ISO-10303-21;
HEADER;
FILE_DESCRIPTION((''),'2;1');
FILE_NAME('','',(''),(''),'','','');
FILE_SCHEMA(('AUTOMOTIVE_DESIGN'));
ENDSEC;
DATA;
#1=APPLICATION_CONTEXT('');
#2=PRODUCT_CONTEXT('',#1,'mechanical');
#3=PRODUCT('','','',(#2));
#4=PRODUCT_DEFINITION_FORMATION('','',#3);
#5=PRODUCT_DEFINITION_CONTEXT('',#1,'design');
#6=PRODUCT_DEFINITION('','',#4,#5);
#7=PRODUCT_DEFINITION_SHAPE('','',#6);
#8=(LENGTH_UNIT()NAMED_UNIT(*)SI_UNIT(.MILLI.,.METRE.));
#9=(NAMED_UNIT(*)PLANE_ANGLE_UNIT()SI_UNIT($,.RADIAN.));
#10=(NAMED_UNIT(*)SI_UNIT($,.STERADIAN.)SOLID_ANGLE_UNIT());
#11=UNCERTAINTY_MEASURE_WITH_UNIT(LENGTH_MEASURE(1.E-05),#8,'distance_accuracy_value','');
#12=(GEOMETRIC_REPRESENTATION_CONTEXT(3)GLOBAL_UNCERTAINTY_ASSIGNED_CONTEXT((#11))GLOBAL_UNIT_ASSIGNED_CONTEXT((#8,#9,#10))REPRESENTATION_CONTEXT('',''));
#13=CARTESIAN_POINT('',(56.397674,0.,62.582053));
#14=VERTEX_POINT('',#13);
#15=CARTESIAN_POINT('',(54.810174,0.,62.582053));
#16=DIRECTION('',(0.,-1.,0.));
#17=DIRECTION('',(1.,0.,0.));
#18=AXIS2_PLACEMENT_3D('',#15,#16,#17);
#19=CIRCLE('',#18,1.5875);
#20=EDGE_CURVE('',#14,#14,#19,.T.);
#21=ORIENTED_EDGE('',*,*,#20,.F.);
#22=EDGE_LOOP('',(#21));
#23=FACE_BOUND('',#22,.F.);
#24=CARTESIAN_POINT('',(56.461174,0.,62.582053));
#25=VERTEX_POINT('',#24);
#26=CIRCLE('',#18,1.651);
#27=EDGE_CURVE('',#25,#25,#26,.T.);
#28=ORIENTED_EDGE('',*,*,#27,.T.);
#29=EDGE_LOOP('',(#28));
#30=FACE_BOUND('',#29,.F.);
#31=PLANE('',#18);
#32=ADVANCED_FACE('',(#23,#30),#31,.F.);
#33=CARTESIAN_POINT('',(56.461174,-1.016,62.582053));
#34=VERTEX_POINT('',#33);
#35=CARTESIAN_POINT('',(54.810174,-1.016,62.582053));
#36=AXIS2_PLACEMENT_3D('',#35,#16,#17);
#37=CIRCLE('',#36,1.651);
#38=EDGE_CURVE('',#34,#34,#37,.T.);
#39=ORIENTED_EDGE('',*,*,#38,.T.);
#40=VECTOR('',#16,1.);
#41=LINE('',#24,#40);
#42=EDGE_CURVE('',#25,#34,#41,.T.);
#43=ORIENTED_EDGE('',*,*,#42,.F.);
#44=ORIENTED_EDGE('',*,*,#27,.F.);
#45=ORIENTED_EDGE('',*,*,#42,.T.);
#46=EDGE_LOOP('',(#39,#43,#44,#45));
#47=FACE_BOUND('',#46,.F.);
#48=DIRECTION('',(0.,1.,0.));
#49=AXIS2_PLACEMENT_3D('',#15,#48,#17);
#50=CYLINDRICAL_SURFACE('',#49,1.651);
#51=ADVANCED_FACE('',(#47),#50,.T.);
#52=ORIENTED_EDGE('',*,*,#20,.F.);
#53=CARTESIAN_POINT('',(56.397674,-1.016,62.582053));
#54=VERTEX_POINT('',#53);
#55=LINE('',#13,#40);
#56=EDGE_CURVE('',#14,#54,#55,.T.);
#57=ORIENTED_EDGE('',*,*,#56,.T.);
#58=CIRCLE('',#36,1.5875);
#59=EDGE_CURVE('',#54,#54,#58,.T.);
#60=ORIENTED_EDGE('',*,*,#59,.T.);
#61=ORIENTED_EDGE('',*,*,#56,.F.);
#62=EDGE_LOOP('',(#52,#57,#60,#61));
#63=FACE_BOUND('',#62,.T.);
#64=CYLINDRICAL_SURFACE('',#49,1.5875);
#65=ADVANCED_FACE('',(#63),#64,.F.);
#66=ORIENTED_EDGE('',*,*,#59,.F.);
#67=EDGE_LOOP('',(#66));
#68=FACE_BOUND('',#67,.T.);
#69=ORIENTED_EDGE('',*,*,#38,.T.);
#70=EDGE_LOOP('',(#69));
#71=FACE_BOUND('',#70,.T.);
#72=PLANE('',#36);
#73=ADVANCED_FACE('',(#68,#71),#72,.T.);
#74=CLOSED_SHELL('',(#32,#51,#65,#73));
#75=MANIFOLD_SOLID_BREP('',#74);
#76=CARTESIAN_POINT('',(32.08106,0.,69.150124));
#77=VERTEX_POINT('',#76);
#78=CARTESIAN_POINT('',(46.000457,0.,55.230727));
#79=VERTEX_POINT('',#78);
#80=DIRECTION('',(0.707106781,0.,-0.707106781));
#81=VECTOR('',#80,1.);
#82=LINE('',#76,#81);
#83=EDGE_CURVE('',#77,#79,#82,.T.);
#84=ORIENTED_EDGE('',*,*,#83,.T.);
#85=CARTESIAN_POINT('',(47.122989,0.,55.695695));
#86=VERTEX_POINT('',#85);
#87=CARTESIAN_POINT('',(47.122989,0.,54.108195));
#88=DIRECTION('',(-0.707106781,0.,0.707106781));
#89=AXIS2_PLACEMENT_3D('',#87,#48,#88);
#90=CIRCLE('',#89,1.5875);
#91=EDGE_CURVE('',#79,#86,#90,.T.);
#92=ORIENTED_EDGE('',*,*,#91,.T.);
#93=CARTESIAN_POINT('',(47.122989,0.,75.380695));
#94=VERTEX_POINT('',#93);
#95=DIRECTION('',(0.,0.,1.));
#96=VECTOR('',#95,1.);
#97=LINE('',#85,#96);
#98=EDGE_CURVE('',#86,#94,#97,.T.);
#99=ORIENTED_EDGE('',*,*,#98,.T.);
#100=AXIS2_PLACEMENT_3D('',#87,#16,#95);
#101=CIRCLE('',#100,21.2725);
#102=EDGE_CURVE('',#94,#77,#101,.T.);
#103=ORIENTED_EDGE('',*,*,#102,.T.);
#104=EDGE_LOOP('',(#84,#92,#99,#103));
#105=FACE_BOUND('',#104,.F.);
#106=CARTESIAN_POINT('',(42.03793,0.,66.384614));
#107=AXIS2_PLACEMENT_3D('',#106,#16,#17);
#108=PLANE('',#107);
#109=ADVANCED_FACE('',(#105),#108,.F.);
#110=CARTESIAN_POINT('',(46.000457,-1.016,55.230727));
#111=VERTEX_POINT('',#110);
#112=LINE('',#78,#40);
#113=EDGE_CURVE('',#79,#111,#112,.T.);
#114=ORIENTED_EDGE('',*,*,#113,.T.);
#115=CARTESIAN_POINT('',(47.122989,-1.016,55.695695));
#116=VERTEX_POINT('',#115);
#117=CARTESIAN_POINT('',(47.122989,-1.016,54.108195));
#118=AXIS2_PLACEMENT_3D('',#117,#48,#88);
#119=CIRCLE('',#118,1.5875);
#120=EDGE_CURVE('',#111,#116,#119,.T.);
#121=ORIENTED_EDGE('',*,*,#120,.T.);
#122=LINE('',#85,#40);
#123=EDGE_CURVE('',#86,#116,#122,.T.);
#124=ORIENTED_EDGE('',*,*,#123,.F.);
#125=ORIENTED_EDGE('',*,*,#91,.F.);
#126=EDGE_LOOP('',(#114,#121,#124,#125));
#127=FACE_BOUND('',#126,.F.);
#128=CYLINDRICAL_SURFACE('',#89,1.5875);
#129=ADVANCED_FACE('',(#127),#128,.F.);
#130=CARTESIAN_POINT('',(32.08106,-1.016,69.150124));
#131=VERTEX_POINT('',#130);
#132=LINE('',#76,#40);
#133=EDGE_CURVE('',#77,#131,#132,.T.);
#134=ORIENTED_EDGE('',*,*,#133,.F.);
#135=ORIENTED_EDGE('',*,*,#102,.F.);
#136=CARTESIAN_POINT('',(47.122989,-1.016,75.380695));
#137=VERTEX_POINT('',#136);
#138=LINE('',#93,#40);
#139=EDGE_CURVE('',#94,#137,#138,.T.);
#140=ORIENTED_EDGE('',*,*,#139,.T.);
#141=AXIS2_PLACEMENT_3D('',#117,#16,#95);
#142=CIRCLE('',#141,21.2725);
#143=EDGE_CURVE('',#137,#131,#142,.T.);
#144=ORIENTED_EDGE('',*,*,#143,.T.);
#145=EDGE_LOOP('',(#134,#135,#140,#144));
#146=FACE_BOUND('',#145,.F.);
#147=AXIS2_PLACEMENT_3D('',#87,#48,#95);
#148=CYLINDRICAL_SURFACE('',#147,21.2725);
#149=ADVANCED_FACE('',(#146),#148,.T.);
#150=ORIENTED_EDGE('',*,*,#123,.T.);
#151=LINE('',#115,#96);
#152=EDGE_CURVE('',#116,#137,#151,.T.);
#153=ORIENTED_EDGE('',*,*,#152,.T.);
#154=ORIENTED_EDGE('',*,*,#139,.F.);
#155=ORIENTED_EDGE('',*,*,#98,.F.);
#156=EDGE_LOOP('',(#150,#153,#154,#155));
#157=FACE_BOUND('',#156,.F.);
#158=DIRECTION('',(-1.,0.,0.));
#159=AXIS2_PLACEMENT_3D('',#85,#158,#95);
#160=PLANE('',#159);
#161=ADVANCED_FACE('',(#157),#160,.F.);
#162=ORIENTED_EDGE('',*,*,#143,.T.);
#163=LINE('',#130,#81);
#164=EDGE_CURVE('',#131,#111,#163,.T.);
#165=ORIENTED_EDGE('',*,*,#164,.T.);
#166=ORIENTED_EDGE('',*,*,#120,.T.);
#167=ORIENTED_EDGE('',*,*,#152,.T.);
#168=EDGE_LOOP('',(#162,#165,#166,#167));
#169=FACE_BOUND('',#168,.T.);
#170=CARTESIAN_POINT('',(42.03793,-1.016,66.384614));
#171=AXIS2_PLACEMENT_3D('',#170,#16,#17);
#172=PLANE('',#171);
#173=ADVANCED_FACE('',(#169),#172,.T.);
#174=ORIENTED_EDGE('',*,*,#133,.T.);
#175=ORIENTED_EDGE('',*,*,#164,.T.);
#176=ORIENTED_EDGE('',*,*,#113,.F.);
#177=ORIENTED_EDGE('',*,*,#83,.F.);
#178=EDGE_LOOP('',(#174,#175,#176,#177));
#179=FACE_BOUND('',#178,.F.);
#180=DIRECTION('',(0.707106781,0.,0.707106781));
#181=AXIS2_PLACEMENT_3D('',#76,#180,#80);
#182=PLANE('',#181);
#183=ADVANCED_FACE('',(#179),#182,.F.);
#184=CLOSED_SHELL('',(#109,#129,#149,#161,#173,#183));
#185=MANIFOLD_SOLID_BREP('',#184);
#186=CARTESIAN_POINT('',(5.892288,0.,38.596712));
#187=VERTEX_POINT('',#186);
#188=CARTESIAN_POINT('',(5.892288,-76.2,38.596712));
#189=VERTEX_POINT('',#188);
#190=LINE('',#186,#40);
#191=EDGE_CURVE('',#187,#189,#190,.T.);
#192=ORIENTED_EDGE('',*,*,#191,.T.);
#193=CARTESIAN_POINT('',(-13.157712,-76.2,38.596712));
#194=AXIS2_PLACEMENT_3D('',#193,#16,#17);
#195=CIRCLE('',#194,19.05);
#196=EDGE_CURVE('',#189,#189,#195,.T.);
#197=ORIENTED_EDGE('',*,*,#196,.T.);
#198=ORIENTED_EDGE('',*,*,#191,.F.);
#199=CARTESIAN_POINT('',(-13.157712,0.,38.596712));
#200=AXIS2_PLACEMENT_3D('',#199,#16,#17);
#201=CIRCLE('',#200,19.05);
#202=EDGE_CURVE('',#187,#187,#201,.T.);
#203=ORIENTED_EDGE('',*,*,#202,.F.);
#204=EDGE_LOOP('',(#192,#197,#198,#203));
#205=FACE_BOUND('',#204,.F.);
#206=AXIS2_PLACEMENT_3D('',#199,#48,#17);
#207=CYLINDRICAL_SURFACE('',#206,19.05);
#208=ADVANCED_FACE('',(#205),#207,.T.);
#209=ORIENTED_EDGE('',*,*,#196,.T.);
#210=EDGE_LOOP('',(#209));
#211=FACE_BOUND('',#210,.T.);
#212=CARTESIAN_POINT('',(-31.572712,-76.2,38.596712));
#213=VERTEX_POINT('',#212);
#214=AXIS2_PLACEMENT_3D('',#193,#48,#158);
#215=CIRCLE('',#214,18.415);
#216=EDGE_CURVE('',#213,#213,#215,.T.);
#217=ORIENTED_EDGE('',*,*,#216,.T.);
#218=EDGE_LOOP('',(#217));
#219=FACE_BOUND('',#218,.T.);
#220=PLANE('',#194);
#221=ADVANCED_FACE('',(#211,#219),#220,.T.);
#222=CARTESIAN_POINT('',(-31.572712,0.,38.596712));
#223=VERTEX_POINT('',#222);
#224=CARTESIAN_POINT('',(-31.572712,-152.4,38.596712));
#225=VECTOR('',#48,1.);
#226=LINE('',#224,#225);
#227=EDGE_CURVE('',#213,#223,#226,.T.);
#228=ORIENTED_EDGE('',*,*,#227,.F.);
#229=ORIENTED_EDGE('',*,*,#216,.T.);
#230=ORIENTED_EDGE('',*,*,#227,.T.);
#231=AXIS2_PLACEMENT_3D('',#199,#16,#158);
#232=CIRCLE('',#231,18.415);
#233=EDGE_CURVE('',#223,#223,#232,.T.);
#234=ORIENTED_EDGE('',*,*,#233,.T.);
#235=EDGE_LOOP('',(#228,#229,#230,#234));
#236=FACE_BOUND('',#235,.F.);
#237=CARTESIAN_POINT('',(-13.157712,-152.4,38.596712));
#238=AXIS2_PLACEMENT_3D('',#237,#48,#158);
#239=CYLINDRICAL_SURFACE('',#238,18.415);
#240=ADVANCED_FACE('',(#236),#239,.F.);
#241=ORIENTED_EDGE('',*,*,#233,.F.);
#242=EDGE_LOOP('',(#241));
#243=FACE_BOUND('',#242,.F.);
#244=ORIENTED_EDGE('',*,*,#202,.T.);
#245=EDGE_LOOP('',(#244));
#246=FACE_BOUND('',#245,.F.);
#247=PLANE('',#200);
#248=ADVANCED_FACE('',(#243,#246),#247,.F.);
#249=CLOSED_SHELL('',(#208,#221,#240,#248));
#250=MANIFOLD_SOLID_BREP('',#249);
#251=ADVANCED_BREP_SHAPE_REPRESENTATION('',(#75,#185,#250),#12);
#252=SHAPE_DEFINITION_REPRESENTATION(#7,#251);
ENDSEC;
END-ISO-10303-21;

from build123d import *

# Parameters (mm, degrees)
F0_R     = 19.05
F1_DEPTH = 76.2
F3_D     = 36.83
F3_DEPTH = 76.2
F3_TIP   = 11.0648482994
F5_DEPTH = 1.016
F8_R     = 1.651
F8_R_2   = 1.5875
F9_DEPTH = 1.016


# Not quite as in the source:
# - a feature of the source that left no trace in its solid (it failed there, or was rolled back) is left out
# - a length typed as a fraction of an inch, garbled in the dataset ("3 / 203.2 mm" for 3/8 in), is restored
# - a feature names something its author has since deleted; it is built from what else it names


with BuildPart() as f1:
    # F0 (on Front) → F1 (new body)
    with BuildSketch(Plane.XZ):
        with Locations((-13.1577122957, 38.5967120528)):
            Circle(F0_R)
    extrude(amount=F1_DEPTH)

    # F3
    with Locations(Plane.XZ.offset(76.2)):
        with Locations((-13.1577122957, 38.5967120528)):
            Hole(F3_D / 2, depth=F3_DEPTH)
            with Locations((0, 0, -(F3_DEPTH + F3_TIP / 2))):  # 118° drill point
                Cone(0, F3_D / 2, F3_TIP, mode=Mode.SUBTRACT)


with BuildPart() as f5:
    # F4 (on Front) → F5 (new body)
    with BuildSketch(Plane.XZ):
        with BuildLine():
            Line((47.1229890541, 55.69569515), (47.1229890541, 75.38069515))
            ThreePointArc((47.1229890541, 75.38069515), (38.9823557391, 73.7614225053), (32.0810600513, 69.1501241528))
            Line((32.0810600513, 69.1501241528), (46.0004570389, 55.2307271651))
            ThreePointArc((46.0004570389, 55.2307271651), (46.5154791052, 55.5748539078), (47.1229890541, 55.69569515))
        make_face()
    extrude(amount=F5_DEPTH)


with BuildPart() as f9:
    # F8 (on Front) → F9 (new body)
    with BuildSketch(Plane.XZ):
        with Locations((54.8101738095, 62.5820532441)):
            Circle(F8_R)
        with Locations((54.8101738095, 62.5820532441)):
            Circle(F8_R_2, mode=Mode.SUBTRACT)
    extrude(amount=F9_DEPTH)


solid = Compound([f1.part, f5.part, f9.part])
